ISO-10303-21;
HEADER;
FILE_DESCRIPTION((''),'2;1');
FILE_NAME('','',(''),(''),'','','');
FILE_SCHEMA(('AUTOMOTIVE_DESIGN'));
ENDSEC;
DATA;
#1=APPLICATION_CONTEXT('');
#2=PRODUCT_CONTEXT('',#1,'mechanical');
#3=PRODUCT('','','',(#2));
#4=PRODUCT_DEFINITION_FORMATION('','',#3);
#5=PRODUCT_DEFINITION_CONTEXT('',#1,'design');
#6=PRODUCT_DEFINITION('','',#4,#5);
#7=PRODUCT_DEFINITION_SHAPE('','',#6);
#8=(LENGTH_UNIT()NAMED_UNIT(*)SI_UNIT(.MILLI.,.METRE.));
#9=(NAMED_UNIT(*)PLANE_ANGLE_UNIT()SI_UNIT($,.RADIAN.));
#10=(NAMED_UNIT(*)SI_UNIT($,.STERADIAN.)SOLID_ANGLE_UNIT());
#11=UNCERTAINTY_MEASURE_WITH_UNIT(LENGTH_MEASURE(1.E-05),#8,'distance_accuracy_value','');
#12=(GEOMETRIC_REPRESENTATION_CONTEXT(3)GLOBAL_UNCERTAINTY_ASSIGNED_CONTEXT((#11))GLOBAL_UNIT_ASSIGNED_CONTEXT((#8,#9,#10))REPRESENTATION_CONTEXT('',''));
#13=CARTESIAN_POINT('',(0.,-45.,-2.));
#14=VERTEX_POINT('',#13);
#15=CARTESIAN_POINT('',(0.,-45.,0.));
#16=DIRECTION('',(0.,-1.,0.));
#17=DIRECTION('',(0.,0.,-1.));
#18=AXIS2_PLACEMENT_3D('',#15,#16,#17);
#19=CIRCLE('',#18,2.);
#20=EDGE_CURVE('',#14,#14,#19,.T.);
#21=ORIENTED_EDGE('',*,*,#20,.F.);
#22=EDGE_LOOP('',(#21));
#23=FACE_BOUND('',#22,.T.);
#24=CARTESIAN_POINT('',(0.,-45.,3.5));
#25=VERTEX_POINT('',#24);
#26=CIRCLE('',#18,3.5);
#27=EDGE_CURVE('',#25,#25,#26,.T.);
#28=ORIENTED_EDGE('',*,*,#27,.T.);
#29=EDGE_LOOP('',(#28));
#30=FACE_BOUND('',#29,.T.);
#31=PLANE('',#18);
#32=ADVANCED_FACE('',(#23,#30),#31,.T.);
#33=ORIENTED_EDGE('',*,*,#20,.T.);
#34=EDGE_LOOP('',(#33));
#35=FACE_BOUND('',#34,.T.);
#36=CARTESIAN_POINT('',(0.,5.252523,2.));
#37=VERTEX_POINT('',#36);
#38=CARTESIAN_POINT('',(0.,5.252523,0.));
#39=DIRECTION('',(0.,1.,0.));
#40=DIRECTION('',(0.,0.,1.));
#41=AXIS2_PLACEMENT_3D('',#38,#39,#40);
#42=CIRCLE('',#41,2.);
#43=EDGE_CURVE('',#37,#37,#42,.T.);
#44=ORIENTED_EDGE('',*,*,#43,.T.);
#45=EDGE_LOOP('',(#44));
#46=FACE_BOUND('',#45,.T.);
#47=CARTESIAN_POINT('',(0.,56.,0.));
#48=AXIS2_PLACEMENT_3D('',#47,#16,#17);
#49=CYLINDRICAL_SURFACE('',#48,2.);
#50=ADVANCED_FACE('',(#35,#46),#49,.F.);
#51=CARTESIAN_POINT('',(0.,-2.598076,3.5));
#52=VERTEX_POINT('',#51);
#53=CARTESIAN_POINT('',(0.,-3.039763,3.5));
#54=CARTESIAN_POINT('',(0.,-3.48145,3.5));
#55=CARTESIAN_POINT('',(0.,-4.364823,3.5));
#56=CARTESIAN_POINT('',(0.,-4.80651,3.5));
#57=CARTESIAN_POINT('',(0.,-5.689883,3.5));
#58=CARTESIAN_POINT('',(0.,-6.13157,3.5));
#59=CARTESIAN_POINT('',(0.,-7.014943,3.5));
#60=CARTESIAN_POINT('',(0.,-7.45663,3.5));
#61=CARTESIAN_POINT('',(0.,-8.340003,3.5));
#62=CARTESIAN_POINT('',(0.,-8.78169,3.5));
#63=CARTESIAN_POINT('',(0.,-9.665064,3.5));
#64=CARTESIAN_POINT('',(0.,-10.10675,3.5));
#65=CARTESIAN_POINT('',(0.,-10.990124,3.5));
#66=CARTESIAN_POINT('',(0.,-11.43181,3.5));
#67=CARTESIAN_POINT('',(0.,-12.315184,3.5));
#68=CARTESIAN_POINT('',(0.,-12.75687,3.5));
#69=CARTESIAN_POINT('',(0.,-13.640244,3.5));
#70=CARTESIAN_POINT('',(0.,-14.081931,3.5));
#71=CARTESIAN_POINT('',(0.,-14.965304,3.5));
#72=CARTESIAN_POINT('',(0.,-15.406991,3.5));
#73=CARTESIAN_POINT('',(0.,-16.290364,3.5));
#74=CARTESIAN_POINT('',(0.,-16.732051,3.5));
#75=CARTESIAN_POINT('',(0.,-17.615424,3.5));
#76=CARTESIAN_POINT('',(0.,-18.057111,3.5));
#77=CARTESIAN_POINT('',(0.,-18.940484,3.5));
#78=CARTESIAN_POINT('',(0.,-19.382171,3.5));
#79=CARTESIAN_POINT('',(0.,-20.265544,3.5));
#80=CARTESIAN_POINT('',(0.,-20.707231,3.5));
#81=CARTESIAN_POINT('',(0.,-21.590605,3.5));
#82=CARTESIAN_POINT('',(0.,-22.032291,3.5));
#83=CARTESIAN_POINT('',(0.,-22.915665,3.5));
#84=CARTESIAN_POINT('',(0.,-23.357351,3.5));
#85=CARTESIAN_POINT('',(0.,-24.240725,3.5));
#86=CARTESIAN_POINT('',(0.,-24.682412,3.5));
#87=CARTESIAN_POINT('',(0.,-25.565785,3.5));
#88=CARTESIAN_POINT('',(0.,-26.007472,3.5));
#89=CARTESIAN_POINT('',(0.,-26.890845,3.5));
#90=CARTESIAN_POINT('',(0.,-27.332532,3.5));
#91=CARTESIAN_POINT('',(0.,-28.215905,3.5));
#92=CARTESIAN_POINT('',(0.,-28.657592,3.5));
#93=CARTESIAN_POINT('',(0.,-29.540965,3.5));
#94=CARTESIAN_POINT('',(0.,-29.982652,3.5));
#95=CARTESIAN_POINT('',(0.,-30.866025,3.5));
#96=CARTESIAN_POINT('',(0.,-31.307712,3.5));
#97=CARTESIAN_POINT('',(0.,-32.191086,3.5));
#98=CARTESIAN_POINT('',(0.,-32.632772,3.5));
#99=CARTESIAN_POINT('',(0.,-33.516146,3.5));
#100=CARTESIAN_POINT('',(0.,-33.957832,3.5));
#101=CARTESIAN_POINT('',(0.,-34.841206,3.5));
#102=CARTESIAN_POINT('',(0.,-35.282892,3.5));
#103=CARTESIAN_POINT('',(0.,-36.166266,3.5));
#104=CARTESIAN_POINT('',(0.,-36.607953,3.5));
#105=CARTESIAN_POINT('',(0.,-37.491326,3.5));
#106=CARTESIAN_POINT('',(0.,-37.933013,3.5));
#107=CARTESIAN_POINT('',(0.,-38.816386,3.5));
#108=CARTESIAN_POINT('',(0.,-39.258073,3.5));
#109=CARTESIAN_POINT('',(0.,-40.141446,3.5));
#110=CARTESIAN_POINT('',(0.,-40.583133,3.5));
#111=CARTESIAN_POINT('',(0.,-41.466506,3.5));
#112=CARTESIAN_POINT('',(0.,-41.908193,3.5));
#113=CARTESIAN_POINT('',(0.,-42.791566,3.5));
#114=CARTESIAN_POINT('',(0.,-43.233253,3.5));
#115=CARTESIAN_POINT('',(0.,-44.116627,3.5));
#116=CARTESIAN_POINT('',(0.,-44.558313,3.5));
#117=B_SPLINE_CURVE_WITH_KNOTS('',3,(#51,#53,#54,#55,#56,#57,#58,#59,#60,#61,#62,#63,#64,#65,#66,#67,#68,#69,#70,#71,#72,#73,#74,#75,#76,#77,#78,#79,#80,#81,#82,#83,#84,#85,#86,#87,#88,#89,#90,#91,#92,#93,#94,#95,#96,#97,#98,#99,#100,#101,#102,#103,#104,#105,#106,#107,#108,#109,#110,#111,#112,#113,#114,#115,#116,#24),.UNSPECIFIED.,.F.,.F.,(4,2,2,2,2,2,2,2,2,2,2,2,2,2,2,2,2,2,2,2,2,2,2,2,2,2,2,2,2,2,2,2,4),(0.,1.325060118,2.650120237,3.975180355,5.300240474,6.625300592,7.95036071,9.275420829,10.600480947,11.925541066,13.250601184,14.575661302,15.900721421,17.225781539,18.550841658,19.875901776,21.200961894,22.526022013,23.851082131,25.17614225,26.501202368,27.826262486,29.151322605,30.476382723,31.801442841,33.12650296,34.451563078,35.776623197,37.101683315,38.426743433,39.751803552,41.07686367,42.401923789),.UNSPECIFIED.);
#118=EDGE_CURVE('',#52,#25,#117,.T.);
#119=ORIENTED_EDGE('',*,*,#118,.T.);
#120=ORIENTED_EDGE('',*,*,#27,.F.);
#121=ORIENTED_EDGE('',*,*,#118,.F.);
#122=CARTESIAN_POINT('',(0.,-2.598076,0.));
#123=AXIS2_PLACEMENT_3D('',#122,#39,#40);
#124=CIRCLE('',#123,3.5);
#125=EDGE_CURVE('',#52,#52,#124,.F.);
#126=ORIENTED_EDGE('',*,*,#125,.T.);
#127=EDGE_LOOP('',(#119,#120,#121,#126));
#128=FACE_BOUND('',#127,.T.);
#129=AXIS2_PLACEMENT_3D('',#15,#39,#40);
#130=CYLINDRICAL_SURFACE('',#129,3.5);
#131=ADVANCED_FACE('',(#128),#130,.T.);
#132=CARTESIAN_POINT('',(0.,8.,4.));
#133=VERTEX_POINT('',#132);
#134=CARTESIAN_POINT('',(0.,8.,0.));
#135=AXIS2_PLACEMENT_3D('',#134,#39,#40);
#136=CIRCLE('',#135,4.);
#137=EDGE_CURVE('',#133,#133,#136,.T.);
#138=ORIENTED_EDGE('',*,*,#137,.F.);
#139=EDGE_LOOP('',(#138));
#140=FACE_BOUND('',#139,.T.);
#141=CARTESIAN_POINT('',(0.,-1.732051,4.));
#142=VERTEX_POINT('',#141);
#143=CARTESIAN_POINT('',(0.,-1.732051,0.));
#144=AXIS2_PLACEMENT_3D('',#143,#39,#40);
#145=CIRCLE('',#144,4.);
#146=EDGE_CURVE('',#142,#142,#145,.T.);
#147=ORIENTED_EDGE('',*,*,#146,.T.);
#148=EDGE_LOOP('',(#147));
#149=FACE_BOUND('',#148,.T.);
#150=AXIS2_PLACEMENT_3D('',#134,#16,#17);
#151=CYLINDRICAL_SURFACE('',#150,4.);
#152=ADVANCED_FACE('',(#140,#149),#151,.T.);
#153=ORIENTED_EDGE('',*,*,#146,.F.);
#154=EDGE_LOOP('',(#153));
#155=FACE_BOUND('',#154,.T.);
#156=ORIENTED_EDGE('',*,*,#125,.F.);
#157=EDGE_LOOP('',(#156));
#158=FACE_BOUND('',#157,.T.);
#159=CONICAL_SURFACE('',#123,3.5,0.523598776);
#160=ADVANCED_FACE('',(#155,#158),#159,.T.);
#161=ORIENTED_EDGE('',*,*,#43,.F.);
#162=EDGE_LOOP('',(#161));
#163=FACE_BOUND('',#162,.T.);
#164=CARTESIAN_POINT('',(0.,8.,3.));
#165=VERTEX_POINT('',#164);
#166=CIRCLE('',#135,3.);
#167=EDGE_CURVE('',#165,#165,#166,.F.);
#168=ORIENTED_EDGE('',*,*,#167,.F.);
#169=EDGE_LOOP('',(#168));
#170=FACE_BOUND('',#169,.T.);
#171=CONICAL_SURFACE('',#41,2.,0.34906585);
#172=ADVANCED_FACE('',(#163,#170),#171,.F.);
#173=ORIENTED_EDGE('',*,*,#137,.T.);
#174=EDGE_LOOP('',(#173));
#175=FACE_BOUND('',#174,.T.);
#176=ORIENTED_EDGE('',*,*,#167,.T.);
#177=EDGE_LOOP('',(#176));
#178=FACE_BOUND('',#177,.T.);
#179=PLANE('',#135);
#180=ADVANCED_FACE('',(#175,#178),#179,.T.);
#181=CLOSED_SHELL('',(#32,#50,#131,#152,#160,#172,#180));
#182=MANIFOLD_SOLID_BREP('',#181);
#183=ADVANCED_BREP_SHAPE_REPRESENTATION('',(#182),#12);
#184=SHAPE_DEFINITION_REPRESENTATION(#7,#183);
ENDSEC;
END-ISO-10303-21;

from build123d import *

# Parameters (mm, degrees)
SKETCH_1_R          = 4
EXTRUDE_1_DEPTH     = 8
SKETCH_2_R          = 3.5
EXTRUDE_2_DEPTH     = 45
CHAMFER_1_SIZE      = 1.5
CHAMFER_1_SIZE_2    = 2.598076211
SKETCH_3_R          = 2
CUT_EXTRUDE_1_DEPTH = 101
CHAMFER_2_SIZE      = 1
CHAMFER_2_SIZE2     = 2.747477419


with BuildPart() as part:
    # 草图1 → 凸台-拉伸1 (new body)
    with BuildSketch(Plane(origin=(0, 0, 0), x_dir=(1, 0, 0), z_dir=(0, 1, 0))):
        with Locations(Location((0, 0, 0), (0, 0, 270))):
            Circle(SKETCH_1_R)
    extrude(amount=EXTRUDE_1_DEPTH)

    # 草图2 → 凸台-拉伸2 (add)
    with BuildSketch(Plane.XZ):
        with Locations(Location((0, 0, 0), (0, 0, 90))):
            Circle(SKETCH_2_R)
    extrude(amount=EXTRUDE_2_DEPTH)

    # 倒角1
    # the kernel refuses this chamfer: 2.598076211, 1.5 mm, written as the material it adds along each edge
    with BuildSketch(Plane(origin=(0, 0, 0), x_dir=(0, 0, 1), z_dir=(1, 0, 0))) as chamfer_1_piece_1_section:
        Polygon((3.5 + CHAMFER_1_SIZE, 0), (3.5, CHAMFER_1_SIZE_2), (3.5, 0), align=None)
    chamfer_1_piece_1 = revolve(axis=Axis((0, 0, 0), (0, -1, 0)), mode=Mode.PRIVATE)
    chamfer_1_piece_1 = chamfer_1_piece_1 & Plane(origin=(0, -2.194625368, 0), x_dir=(0, 0, 1), z_dir=(0, -1, 0)) * Cylinder(4, 20, mode=Mode.PRIVATE)
    add(chamfer_1_piece_1)

    # 草图3 → 切除-拉伸1 (cut)
    with BuildSketch(Plane.XZ.offset(45)):
        with Locations(Location((0, 0, 0), (0, 0, 270))):
            Circle(SKETCH_3_R)
    extrude(amount=-CUT_EXTRUDE_1_DEPTH, mode=Mode.SUBTRACT)

    # 倒角2
    chamfer_2_edges = [part.edges().sort_by_distance(p)[0] for p in [
        (0, 8, 2),
    ]]
    chamfer_2_side = [part.faces().sort_by_distance(p)[0] for p in [
        (0, 8, -3.886862915),
    ]]
    chamfer(chamfer_2_edges, length=CHAMFER_2_SIZE, length2=CHAMFER_2_SIZE2, reference=chamfer_2_side[0])


solid = part.part
